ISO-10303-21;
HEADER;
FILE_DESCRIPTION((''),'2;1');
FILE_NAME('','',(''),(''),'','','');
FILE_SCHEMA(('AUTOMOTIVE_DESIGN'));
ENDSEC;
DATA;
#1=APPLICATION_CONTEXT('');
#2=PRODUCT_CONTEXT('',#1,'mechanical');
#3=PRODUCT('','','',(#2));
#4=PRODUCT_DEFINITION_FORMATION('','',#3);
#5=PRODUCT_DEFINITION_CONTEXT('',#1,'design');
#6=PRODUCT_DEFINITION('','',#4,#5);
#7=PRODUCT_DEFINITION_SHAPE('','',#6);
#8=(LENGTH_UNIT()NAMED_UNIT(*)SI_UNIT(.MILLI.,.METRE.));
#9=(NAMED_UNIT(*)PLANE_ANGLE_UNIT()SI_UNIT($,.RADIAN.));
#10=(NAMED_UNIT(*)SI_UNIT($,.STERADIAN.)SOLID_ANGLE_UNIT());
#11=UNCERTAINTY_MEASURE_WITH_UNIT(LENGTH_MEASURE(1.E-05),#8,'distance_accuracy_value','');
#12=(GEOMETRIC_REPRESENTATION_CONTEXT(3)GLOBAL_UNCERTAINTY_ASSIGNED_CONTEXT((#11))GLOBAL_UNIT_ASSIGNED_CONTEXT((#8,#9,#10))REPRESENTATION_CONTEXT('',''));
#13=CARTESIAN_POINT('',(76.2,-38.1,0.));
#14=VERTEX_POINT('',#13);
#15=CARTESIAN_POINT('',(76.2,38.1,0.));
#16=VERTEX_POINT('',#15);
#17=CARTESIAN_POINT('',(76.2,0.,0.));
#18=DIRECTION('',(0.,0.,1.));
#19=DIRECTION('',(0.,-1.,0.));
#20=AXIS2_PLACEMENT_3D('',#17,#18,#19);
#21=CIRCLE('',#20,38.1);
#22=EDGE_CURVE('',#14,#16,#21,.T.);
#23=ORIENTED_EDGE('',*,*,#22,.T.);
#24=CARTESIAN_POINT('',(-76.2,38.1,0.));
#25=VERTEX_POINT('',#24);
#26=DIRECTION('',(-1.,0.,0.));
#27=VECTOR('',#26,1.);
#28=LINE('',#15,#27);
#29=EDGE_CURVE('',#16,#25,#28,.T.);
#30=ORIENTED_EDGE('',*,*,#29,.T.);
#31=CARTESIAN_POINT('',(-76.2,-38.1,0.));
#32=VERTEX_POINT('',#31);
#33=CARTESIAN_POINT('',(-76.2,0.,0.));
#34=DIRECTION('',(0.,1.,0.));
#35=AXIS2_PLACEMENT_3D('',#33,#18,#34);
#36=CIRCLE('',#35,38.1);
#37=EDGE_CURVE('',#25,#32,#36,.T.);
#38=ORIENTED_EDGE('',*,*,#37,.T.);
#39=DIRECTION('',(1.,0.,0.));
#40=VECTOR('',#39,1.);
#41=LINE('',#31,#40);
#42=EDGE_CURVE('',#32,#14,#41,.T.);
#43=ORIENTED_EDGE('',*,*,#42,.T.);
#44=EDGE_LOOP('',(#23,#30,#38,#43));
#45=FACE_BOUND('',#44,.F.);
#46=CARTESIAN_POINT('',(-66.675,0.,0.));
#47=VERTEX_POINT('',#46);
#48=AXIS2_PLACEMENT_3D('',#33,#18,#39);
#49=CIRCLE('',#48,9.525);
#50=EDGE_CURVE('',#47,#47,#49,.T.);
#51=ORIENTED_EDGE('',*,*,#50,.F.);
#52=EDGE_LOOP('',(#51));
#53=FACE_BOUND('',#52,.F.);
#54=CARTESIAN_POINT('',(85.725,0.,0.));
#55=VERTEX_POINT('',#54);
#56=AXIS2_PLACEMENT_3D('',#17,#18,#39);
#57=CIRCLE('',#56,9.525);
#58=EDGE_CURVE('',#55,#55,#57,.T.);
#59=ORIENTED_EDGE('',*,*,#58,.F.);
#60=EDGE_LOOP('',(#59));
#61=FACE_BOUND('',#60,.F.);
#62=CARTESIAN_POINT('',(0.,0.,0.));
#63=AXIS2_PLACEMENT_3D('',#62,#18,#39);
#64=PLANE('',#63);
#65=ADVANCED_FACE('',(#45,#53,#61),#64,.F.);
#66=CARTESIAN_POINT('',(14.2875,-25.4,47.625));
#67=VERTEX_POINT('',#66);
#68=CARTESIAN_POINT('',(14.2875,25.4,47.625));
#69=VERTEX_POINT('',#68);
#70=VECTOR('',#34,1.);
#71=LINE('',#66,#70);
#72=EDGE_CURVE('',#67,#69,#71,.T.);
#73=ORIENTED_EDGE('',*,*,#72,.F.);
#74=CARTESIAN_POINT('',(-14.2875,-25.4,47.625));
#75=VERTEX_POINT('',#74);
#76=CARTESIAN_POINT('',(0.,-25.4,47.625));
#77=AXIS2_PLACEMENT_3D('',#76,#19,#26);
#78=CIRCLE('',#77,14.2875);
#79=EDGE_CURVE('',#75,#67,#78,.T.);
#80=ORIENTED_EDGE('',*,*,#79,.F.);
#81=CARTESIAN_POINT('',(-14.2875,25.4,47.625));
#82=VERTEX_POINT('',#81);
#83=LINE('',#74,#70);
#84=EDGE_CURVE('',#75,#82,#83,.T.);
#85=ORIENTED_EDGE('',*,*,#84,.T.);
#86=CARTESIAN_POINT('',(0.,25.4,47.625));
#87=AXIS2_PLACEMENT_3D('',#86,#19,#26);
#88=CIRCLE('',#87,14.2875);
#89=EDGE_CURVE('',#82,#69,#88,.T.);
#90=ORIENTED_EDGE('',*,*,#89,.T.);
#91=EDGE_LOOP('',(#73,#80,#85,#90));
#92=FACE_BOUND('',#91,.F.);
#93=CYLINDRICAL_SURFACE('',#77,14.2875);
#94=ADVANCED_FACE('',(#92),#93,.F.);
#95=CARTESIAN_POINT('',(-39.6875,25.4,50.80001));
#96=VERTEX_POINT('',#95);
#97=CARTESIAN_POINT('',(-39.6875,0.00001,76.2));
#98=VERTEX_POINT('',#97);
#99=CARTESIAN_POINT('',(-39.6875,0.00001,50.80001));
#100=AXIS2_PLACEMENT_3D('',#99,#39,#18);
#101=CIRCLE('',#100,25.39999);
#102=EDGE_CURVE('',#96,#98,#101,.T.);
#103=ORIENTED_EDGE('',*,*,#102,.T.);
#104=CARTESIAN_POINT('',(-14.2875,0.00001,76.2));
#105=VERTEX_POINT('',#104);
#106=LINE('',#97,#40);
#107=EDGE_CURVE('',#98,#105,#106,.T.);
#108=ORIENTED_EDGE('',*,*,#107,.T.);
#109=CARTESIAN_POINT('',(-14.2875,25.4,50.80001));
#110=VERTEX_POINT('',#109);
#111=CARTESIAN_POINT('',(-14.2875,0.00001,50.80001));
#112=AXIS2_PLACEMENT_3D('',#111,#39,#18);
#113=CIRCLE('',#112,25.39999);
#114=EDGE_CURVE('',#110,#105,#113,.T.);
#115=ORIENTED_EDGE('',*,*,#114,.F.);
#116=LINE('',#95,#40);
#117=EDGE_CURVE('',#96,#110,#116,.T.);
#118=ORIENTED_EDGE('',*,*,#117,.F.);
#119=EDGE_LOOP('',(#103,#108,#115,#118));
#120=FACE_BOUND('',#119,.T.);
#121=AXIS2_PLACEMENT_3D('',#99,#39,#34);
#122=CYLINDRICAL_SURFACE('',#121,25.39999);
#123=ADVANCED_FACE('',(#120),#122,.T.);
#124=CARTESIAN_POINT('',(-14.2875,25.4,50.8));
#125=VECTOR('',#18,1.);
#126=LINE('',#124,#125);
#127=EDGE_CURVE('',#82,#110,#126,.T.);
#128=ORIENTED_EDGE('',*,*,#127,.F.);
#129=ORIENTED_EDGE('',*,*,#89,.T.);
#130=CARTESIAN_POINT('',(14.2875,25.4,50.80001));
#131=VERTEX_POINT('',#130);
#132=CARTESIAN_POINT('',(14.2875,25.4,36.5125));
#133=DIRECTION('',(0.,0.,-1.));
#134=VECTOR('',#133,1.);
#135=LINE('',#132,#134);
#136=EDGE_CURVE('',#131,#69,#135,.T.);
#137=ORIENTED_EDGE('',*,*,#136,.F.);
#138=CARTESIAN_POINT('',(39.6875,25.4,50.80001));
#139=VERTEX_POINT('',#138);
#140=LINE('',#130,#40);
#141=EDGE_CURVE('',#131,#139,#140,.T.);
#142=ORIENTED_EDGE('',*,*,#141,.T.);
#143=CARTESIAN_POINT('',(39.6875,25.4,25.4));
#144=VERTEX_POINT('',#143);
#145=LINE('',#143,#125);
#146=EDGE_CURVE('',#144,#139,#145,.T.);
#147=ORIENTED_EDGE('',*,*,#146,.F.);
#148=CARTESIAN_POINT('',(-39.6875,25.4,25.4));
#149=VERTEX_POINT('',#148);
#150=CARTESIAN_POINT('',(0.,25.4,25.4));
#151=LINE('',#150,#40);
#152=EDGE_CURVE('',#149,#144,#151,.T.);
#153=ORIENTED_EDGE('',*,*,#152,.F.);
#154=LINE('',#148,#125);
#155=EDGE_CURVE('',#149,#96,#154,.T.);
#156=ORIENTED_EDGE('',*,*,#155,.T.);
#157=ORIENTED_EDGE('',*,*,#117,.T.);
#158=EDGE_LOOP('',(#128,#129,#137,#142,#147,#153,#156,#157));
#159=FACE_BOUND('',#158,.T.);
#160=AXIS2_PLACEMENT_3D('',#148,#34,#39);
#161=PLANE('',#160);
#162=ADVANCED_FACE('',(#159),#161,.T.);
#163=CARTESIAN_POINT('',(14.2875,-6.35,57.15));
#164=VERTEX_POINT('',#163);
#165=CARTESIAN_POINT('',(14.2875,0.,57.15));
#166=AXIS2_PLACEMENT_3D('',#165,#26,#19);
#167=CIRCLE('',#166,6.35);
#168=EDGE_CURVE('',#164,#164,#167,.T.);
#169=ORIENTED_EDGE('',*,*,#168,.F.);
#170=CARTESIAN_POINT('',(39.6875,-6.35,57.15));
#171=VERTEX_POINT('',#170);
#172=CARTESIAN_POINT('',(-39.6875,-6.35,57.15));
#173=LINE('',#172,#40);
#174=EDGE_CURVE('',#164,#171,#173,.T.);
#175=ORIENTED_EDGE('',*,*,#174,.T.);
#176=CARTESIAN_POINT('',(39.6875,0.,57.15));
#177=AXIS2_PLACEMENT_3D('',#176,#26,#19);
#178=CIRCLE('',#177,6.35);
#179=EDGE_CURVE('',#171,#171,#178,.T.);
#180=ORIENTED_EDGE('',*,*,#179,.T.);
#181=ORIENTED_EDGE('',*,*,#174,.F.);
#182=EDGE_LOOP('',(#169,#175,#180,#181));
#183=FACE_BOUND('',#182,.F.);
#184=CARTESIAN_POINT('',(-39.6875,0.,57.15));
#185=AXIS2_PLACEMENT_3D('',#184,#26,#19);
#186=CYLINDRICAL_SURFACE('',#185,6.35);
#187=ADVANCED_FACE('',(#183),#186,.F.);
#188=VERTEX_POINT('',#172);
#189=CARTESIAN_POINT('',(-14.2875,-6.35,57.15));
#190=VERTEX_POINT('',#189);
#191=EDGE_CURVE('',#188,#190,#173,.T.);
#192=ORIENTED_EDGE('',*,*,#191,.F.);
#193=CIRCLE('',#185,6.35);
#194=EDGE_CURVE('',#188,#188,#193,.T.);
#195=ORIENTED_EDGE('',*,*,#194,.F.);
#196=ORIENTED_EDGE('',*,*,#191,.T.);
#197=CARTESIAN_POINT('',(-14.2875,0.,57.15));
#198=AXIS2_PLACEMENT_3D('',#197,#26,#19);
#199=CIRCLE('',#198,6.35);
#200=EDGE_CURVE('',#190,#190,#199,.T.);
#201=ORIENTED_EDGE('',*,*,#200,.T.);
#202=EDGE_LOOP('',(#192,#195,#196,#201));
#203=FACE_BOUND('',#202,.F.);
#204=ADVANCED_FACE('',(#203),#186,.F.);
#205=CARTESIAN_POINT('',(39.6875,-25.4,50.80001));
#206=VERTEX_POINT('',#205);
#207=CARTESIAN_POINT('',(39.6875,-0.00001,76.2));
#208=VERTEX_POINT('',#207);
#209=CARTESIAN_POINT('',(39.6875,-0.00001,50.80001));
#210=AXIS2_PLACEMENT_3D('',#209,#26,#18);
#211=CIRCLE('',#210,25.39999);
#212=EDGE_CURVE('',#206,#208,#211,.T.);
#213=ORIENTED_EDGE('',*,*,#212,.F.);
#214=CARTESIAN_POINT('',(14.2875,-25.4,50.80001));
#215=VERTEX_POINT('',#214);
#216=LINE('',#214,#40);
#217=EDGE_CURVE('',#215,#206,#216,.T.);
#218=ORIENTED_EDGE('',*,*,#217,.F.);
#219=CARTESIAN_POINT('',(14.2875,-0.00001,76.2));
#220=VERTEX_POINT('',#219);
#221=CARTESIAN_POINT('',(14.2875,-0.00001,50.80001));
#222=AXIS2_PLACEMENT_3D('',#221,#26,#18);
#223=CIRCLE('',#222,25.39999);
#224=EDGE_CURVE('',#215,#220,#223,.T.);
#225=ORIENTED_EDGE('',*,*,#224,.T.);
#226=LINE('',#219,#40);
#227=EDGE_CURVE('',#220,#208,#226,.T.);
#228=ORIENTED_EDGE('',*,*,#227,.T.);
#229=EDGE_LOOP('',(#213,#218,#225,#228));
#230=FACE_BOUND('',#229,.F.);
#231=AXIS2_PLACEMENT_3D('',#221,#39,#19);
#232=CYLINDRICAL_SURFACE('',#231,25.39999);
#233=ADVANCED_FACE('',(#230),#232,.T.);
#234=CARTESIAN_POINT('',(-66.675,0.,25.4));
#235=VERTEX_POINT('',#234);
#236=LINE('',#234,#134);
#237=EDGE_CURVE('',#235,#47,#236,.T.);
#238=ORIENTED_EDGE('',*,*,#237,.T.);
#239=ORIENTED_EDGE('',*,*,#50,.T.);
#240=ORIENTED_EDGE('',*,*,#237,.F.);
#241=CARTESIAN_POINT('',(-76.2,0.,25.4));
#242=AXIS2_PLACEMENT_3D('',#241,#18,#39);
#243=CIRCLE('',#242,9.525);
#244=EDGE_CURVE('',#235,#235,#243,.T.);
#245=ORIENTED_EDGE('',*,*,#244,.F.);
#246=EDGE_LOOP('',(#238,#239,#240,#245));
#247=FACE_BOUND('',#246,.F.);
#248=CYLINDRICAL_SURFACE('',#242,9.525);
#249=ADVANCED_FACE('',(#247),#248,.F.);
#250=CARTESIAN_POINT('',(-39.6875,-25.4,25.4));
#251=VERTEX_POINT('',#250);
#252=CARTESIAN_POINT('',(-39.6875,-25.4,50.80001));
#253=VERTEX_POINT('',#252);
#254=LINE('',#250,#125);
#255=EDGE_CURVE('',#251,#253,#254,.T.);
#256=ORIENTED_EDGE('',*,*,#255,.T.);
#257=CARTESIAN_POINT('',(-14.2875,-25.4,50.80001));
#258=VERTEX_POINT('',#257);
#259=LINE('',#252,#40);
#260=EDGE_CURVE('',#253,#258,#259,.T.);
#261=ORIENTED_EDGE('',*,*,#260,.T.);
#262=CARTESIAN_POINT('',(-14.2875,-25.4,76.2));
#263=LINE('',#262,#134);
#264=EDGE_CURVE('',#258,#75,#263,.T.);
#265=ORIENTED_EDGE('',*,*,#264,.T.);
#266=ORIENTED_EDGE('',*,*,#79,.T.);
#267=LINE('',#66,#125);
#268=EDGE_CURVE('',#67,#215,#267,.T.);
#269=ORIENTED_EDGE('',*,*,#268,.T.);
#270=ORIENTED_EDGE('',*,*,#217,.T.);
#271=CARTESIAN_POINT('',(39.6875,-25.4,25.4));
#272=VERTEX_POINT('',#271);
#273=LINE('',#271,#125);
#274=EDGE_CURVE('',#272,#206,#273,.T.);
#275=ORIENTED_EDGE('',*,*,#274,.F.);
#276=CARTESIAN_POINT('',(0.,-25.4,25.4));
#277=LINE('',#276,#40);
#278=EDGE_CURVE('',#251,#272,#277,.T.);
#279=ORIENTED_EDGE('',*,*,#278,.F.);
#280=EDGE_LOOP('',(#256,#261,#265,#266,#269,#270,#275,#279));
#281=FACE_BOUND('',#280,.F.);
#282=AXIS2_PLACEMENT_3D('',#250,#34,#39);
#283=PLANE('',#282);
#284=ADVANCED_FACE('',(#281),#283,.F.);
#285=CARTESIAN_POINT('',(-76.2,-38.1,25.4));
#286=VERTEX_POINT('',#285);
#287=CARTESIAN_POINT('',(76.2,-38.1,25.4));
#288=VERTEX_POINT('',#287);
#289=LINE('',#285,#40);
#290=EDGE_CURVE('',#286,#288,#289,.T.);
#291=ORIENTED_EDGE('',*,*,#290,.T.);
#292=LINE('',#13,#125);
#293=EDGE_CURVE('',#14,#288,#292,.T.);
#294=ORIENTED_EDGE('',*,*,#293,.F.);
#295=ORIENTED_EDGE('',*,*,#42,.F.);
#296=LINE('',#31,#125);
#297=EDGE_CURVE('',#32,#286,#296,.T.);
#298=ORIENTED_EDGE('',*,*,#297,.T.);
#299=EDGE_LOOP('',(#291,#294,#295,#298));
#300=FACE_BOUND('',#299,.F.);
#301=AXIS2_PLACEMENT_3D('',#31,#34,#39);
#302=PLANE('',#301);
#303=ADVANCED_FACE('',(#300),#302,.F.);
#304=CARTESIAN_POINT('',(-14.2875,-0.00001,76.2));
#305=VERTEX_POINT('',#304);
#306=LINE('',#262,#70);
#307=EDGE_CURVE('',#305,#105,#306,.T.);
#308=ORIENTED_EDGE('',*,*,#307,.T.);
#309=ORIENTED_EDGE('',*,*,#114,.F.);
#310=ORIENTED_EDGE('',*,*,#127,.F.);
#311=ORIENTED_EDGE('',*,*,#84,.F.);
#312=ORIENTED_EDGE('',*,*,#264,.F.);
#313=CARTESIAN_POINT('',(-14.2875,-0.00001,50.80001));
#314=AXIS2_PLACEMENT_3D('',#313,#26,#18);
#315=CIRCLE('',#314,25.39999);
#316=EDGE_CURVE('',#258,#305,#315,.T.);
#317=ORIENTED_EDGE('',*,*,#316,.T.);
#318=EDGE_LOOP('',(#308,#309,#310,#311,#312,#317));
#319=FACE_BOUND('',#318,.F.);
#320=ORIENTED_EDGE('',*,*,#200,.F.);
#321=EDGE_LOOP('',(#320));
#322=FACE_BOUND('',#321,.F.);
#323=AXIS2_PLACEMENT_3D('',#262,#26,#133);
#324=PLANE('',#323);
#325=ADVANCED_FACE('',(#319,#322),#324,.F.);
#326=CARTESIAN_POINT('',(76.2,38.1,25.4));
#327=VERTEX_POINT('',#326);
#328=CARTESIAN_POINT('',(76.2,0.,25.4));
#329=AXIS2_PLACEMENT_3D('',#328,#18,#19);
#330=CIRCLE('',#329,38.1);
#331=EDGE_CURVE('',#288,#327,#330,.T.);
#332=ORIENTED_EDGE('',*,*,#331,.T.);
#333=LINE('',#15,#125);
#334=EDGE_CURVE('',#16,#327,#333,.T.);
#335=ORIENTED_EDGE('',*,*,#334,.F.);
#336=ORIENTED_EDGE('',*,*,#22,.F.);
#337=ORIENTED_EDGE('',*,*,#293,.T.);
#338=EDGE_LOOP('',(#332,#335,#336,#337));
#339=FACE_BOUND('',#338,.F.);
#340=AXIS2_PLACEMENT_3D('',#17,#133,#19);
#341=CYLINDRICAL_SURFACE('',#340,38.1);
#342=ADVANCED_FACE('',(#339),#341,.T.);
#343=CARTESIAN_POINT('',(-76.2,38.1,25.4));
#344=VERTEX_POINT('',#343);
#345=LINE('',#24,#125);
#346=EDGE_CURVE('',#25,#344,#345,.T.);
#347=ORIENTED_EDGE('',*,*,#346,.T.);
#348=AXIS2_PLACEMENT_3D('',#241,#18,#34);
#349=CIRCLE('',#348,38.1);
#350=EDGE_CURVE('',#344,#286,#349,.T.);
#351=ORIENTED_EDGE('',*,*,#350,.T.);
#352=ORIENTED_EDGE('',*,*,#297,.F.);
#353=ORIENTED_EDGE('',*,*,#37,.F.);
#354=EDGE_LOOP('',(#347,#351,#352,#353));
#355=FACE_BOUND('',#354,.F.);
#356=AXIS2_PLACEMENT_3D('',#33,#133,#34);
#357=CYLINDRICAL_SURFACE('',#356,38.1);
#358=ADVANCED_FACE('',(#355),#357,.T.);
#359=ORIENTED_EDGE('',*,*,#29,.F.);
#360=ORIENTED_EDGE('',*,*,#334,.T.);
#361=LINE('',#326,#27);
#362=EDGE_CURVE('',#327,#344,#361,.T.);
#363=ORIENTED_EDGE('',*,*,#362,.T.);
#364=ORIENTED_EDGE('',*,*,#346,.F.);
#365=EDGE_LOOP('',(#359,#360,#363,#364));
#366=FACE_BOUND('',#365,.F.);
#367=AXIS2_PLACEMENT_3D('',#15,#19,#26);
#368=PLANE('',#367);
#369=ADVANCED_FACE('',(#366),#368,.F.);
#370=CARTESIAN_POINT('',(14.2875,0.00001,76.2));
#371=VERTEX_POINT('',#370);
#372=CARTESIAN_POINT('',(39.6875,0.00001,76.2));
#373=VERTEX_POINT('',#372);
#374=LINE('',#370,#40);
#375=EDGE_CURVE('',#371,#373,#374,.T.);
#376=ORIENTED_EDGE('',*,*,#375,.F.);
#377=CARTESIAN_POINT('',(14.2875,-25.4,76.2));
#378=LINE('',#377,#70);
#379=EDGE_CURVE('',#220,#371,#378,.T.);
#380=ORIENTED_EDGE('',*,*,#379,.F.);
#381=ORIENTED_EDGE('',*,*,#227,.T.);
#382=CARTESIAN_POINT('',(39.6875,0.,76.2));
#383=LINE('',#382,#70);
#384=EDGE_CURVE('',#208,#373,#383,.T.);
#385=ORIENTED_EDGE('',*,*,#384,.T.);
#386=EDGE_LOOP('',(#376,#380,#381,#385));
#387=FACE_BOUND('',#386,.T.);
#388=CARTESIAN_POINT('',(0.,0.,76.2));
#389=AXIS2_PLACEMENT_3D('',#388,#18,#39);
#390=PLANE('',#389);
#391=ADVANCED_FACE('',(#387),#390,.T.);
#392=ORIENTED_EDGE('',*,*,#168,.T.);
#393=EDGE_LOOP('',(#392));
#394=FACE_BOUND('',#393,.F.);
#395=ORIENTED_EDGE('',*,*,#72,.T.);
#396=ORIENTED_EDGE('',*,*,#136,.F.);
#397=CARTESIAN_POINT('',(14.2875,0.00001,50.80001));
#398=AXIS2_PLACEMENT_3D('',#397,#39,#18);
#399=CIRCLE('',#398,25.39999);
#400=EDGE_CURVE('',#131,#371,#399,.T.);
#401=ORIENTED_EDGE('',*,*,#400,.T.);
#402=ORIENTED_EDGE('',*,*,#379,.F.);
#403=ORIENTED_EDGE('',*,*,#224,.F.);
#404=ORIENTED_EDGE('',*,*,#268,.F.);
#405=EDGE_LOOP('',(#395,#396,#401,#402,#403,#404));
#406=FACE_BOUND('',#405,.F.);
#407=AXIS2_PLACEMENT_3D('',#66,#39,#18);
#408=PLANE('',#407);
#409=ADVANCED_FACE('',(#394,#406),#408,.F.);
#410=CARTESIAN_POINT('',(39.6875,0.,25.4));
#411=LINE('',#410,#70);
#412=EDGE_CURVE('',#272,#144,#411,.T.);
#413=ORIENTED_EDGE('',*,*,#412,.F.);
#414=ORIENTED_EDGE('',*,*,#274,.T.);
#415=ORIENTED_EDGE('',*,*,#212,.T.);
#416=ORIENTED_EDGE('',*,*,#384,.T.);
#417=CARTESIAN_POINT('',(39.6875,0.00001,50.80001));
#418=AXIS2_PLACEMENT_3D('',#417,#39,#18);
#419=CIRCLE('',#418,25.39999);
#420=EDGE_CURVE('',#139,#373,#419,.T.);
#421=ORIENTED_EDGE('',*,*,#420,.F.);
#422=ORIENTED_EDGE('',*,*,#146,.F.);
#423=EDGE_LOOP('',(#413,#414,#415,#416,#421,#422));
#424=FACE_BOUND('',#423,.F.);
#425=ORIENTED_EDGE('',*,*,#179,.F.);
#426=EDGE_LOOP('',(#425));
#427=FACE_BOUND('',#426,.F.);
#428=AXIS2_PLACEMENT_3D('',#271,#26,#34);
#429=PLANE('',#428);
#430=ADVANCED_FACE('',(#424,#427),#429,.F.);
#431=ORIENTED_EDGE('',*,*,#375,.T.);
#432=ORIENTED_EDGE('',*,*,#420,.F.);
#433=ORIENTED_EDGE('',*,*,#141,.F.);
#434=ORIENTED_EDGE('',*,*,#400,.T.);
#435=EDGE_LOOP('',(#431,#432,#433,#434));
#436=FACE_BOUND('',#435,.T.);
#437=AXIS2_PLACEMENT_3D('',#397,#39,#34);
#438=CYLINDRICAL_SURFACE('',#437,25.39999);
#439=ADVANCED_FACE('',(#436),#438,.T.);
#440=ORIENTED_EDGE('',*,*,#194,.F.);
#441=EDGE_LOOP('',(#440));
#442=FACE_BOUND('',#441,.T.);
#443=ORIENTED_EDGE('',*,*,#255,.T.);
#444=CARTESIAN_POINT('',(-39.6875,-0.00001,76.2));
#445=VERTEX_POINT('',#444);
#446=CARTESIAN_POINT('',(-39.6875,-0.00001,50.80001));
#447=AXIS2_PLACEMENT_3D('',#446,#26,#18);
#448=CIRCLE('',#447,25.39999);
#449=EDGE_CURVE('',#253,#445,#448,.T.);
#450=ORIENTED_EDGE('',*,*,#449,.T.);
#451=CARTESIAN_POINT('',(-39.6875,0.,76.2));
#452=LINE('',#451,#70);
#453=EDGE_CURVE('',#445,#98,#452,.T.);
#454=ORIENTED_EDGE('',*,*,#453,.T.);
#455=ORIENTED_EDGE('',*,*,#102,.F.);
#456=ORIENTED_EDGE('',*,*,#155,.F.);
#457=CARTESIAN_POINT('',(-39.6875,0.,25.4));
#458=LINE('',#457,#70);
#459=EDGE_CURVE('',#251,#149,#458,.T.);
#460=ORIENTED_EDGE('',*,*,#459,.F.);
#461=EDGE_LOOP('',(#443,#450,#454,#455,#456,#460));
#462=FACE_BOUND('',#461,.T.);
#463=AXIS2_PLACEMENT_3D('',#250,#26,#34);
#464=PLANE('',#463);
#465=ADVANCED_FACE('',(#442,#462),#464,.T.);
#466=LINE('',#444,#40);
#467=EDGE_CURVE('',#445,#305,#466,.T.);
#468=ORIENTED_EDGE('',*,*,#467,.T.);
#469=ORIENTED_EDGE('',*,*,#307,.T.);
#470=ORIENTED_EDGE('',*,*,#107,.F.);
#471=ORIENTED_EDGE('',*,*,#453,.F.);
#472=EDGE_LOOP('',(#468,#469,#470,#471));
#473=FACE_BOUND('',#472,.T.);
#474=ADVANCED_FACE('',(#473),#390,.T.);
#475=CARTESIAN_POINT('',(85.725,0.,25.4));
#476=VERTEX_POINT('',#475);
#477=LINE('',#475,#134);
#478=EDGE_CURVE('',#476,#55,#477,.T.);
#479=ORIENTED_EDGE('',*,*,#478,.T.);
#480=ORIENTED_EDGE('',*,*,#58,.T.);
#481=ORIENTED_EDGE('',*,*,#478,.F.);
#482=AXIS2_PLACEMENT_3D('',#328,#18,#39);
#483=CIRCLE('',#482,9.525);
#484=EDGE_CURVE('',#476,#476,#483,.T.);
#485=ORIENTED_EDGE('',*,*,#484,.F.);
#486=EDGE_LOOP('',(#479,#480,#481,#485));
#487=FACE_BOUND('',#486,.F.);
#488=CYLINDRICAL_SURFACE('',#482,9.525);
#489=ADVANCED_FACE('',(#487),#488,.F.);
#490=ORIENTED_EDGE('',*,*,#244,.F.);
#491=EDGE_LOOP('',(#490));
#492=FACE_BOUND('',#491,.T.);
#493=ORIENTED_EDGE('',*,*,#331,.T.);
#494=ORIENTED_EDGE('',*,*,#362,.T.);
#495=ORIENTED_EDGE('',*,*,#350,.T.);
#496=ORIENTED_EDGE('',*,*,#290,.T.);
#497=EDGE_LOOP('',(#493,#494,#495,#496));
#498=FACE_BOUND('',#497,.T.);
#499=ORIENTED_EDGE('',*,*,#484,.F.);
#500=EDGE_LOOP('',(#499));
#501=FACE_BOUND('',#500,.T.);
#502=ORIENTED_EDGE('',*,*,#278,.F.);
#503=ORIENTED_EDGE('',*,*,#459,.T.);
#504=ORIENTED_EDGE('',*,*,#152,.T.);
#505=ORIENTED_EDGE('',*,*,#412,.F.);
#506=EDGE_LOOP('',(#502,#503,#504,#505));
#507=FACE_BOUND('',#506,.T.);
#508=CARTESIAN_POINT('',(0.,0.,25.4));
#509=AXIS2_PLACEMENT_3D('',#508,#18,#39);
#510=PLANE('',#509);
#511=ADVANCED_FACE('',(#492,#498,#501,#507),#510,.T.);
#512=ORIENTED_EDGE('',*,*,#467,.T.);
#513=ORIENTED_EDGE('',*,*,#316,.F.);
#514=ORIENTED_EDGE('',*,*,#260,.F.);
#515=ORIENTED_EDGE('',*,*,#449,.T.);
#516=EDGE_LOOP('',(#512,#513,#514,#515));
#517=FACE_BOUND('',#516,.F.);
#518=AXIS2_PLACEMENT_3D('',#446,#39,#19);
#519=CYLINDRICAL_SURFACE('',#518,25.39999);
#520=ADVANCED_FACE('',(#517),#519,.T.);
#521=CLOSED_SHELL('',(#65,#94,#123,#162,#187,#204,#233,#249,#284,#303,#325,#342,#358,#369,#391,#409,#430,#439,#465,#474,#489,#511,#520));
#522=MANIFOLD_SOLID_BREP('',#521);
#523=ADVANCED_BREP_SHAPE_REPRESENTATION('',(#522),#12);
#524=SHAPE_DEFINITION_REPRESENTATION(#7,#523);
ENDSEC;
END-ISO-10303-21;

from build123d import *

# Parameters (mm, degrees)
F1_DEPTH  = 25.4
F2_W      = 79.375
F2_H      = 50.8
F3_DEPTH  = 50.8
F5_DEPTH  = 63.501
F6_R      = 25.39999
F7_R      = 6.35
F8_DEPTH  = 127
F9_R      = 9.525
F10_DEPTH = 25.401


# Not quite as in the source:
# - a fillet or chamfer is up to 0.001 mm smaller than in the source, because OpenCascade refuses the exact size


with BuildPart() as f1:
    # F0 (on Top) → F1 (new body)
    with BuildSketch(Plane.XY):
        with BuildLine():
            ThreePointArc((76.2, -38.1), (114.3, 0), (76.2, 38.1))
            Line((76.2, 38.1), (-76.2, 38.1))
            ThreePointArc((-76.2, 38.1), (-114.3, 0), (-76.2, -38.1))
            Line((-76.2, -38.1), (76.2, -38.1))
        make_face()
    extrude(amount=F1_DEPTH)

    # F2 (on face) → F3 (join)
    with BuildSketch(Plane.XY.offset(25.4)):
        Rectangle(F2_W, F2_H)
    extrude(amount=F3_DEPTH)

    # F4 (on face) → F5 (cut, through all)
    with BuildSketch(Plane.XZ.offset(25.4)):
        with BuildLine():
            Line((14.2875, 76.2), (-14.2875, 76.2))
            Line((-14.2875, 76.2), (-14.2875, 47.625))
            ThreePointArc((-14.2875, 47.625), (0, 33.3375), (14.2875, 47.625))
            Line((14.2875, 47.625), (14.2875, 76.2))
        make_face()
    extrude(amount=-F5_DEPTH, mode=Mode.SUBTRACT)

    # F6 (radius 25.4 in the source; OpenCascade refuses exactly that, so slightly less here)
    f6_edges = [f1.edges().sort_by_distance(p)[0] for p in [
        (-26.9875, -25.4, 76.2),
        (-26.9875, 25.4, 76.2),
        (26.9875, -25.4, 76.2),
        (26.9875, 25.4, 76.2),
    ]]
    fillet(f6_edges, radius=F6_R)

    # F7 (on face) → F8 (cut)
    with BuildSketch(Plane(origin=(-39.6875, 0, 0), x_dir=(0, -1, 0), z_dir=(-1, 0, 0))):
        with Locations((0, 57.15)):
            Circle(F7_R)
    extrude(amount=-F8_DEPTH, mode=Mode.SUBTRACT)

    # F9 (on face) → F10 (cut, through all)
    with BuildSketch(Plane.XY.offset(25.4)):
        with Locations((-76.2, 0)):
            Circle(F9_R)
        with Locations((76.2, 0)):
            Circle(F9_R)
    extrude(amount=-F10_DEPTH, mode=Mode.SUBTRACT)


solid = f1.part
